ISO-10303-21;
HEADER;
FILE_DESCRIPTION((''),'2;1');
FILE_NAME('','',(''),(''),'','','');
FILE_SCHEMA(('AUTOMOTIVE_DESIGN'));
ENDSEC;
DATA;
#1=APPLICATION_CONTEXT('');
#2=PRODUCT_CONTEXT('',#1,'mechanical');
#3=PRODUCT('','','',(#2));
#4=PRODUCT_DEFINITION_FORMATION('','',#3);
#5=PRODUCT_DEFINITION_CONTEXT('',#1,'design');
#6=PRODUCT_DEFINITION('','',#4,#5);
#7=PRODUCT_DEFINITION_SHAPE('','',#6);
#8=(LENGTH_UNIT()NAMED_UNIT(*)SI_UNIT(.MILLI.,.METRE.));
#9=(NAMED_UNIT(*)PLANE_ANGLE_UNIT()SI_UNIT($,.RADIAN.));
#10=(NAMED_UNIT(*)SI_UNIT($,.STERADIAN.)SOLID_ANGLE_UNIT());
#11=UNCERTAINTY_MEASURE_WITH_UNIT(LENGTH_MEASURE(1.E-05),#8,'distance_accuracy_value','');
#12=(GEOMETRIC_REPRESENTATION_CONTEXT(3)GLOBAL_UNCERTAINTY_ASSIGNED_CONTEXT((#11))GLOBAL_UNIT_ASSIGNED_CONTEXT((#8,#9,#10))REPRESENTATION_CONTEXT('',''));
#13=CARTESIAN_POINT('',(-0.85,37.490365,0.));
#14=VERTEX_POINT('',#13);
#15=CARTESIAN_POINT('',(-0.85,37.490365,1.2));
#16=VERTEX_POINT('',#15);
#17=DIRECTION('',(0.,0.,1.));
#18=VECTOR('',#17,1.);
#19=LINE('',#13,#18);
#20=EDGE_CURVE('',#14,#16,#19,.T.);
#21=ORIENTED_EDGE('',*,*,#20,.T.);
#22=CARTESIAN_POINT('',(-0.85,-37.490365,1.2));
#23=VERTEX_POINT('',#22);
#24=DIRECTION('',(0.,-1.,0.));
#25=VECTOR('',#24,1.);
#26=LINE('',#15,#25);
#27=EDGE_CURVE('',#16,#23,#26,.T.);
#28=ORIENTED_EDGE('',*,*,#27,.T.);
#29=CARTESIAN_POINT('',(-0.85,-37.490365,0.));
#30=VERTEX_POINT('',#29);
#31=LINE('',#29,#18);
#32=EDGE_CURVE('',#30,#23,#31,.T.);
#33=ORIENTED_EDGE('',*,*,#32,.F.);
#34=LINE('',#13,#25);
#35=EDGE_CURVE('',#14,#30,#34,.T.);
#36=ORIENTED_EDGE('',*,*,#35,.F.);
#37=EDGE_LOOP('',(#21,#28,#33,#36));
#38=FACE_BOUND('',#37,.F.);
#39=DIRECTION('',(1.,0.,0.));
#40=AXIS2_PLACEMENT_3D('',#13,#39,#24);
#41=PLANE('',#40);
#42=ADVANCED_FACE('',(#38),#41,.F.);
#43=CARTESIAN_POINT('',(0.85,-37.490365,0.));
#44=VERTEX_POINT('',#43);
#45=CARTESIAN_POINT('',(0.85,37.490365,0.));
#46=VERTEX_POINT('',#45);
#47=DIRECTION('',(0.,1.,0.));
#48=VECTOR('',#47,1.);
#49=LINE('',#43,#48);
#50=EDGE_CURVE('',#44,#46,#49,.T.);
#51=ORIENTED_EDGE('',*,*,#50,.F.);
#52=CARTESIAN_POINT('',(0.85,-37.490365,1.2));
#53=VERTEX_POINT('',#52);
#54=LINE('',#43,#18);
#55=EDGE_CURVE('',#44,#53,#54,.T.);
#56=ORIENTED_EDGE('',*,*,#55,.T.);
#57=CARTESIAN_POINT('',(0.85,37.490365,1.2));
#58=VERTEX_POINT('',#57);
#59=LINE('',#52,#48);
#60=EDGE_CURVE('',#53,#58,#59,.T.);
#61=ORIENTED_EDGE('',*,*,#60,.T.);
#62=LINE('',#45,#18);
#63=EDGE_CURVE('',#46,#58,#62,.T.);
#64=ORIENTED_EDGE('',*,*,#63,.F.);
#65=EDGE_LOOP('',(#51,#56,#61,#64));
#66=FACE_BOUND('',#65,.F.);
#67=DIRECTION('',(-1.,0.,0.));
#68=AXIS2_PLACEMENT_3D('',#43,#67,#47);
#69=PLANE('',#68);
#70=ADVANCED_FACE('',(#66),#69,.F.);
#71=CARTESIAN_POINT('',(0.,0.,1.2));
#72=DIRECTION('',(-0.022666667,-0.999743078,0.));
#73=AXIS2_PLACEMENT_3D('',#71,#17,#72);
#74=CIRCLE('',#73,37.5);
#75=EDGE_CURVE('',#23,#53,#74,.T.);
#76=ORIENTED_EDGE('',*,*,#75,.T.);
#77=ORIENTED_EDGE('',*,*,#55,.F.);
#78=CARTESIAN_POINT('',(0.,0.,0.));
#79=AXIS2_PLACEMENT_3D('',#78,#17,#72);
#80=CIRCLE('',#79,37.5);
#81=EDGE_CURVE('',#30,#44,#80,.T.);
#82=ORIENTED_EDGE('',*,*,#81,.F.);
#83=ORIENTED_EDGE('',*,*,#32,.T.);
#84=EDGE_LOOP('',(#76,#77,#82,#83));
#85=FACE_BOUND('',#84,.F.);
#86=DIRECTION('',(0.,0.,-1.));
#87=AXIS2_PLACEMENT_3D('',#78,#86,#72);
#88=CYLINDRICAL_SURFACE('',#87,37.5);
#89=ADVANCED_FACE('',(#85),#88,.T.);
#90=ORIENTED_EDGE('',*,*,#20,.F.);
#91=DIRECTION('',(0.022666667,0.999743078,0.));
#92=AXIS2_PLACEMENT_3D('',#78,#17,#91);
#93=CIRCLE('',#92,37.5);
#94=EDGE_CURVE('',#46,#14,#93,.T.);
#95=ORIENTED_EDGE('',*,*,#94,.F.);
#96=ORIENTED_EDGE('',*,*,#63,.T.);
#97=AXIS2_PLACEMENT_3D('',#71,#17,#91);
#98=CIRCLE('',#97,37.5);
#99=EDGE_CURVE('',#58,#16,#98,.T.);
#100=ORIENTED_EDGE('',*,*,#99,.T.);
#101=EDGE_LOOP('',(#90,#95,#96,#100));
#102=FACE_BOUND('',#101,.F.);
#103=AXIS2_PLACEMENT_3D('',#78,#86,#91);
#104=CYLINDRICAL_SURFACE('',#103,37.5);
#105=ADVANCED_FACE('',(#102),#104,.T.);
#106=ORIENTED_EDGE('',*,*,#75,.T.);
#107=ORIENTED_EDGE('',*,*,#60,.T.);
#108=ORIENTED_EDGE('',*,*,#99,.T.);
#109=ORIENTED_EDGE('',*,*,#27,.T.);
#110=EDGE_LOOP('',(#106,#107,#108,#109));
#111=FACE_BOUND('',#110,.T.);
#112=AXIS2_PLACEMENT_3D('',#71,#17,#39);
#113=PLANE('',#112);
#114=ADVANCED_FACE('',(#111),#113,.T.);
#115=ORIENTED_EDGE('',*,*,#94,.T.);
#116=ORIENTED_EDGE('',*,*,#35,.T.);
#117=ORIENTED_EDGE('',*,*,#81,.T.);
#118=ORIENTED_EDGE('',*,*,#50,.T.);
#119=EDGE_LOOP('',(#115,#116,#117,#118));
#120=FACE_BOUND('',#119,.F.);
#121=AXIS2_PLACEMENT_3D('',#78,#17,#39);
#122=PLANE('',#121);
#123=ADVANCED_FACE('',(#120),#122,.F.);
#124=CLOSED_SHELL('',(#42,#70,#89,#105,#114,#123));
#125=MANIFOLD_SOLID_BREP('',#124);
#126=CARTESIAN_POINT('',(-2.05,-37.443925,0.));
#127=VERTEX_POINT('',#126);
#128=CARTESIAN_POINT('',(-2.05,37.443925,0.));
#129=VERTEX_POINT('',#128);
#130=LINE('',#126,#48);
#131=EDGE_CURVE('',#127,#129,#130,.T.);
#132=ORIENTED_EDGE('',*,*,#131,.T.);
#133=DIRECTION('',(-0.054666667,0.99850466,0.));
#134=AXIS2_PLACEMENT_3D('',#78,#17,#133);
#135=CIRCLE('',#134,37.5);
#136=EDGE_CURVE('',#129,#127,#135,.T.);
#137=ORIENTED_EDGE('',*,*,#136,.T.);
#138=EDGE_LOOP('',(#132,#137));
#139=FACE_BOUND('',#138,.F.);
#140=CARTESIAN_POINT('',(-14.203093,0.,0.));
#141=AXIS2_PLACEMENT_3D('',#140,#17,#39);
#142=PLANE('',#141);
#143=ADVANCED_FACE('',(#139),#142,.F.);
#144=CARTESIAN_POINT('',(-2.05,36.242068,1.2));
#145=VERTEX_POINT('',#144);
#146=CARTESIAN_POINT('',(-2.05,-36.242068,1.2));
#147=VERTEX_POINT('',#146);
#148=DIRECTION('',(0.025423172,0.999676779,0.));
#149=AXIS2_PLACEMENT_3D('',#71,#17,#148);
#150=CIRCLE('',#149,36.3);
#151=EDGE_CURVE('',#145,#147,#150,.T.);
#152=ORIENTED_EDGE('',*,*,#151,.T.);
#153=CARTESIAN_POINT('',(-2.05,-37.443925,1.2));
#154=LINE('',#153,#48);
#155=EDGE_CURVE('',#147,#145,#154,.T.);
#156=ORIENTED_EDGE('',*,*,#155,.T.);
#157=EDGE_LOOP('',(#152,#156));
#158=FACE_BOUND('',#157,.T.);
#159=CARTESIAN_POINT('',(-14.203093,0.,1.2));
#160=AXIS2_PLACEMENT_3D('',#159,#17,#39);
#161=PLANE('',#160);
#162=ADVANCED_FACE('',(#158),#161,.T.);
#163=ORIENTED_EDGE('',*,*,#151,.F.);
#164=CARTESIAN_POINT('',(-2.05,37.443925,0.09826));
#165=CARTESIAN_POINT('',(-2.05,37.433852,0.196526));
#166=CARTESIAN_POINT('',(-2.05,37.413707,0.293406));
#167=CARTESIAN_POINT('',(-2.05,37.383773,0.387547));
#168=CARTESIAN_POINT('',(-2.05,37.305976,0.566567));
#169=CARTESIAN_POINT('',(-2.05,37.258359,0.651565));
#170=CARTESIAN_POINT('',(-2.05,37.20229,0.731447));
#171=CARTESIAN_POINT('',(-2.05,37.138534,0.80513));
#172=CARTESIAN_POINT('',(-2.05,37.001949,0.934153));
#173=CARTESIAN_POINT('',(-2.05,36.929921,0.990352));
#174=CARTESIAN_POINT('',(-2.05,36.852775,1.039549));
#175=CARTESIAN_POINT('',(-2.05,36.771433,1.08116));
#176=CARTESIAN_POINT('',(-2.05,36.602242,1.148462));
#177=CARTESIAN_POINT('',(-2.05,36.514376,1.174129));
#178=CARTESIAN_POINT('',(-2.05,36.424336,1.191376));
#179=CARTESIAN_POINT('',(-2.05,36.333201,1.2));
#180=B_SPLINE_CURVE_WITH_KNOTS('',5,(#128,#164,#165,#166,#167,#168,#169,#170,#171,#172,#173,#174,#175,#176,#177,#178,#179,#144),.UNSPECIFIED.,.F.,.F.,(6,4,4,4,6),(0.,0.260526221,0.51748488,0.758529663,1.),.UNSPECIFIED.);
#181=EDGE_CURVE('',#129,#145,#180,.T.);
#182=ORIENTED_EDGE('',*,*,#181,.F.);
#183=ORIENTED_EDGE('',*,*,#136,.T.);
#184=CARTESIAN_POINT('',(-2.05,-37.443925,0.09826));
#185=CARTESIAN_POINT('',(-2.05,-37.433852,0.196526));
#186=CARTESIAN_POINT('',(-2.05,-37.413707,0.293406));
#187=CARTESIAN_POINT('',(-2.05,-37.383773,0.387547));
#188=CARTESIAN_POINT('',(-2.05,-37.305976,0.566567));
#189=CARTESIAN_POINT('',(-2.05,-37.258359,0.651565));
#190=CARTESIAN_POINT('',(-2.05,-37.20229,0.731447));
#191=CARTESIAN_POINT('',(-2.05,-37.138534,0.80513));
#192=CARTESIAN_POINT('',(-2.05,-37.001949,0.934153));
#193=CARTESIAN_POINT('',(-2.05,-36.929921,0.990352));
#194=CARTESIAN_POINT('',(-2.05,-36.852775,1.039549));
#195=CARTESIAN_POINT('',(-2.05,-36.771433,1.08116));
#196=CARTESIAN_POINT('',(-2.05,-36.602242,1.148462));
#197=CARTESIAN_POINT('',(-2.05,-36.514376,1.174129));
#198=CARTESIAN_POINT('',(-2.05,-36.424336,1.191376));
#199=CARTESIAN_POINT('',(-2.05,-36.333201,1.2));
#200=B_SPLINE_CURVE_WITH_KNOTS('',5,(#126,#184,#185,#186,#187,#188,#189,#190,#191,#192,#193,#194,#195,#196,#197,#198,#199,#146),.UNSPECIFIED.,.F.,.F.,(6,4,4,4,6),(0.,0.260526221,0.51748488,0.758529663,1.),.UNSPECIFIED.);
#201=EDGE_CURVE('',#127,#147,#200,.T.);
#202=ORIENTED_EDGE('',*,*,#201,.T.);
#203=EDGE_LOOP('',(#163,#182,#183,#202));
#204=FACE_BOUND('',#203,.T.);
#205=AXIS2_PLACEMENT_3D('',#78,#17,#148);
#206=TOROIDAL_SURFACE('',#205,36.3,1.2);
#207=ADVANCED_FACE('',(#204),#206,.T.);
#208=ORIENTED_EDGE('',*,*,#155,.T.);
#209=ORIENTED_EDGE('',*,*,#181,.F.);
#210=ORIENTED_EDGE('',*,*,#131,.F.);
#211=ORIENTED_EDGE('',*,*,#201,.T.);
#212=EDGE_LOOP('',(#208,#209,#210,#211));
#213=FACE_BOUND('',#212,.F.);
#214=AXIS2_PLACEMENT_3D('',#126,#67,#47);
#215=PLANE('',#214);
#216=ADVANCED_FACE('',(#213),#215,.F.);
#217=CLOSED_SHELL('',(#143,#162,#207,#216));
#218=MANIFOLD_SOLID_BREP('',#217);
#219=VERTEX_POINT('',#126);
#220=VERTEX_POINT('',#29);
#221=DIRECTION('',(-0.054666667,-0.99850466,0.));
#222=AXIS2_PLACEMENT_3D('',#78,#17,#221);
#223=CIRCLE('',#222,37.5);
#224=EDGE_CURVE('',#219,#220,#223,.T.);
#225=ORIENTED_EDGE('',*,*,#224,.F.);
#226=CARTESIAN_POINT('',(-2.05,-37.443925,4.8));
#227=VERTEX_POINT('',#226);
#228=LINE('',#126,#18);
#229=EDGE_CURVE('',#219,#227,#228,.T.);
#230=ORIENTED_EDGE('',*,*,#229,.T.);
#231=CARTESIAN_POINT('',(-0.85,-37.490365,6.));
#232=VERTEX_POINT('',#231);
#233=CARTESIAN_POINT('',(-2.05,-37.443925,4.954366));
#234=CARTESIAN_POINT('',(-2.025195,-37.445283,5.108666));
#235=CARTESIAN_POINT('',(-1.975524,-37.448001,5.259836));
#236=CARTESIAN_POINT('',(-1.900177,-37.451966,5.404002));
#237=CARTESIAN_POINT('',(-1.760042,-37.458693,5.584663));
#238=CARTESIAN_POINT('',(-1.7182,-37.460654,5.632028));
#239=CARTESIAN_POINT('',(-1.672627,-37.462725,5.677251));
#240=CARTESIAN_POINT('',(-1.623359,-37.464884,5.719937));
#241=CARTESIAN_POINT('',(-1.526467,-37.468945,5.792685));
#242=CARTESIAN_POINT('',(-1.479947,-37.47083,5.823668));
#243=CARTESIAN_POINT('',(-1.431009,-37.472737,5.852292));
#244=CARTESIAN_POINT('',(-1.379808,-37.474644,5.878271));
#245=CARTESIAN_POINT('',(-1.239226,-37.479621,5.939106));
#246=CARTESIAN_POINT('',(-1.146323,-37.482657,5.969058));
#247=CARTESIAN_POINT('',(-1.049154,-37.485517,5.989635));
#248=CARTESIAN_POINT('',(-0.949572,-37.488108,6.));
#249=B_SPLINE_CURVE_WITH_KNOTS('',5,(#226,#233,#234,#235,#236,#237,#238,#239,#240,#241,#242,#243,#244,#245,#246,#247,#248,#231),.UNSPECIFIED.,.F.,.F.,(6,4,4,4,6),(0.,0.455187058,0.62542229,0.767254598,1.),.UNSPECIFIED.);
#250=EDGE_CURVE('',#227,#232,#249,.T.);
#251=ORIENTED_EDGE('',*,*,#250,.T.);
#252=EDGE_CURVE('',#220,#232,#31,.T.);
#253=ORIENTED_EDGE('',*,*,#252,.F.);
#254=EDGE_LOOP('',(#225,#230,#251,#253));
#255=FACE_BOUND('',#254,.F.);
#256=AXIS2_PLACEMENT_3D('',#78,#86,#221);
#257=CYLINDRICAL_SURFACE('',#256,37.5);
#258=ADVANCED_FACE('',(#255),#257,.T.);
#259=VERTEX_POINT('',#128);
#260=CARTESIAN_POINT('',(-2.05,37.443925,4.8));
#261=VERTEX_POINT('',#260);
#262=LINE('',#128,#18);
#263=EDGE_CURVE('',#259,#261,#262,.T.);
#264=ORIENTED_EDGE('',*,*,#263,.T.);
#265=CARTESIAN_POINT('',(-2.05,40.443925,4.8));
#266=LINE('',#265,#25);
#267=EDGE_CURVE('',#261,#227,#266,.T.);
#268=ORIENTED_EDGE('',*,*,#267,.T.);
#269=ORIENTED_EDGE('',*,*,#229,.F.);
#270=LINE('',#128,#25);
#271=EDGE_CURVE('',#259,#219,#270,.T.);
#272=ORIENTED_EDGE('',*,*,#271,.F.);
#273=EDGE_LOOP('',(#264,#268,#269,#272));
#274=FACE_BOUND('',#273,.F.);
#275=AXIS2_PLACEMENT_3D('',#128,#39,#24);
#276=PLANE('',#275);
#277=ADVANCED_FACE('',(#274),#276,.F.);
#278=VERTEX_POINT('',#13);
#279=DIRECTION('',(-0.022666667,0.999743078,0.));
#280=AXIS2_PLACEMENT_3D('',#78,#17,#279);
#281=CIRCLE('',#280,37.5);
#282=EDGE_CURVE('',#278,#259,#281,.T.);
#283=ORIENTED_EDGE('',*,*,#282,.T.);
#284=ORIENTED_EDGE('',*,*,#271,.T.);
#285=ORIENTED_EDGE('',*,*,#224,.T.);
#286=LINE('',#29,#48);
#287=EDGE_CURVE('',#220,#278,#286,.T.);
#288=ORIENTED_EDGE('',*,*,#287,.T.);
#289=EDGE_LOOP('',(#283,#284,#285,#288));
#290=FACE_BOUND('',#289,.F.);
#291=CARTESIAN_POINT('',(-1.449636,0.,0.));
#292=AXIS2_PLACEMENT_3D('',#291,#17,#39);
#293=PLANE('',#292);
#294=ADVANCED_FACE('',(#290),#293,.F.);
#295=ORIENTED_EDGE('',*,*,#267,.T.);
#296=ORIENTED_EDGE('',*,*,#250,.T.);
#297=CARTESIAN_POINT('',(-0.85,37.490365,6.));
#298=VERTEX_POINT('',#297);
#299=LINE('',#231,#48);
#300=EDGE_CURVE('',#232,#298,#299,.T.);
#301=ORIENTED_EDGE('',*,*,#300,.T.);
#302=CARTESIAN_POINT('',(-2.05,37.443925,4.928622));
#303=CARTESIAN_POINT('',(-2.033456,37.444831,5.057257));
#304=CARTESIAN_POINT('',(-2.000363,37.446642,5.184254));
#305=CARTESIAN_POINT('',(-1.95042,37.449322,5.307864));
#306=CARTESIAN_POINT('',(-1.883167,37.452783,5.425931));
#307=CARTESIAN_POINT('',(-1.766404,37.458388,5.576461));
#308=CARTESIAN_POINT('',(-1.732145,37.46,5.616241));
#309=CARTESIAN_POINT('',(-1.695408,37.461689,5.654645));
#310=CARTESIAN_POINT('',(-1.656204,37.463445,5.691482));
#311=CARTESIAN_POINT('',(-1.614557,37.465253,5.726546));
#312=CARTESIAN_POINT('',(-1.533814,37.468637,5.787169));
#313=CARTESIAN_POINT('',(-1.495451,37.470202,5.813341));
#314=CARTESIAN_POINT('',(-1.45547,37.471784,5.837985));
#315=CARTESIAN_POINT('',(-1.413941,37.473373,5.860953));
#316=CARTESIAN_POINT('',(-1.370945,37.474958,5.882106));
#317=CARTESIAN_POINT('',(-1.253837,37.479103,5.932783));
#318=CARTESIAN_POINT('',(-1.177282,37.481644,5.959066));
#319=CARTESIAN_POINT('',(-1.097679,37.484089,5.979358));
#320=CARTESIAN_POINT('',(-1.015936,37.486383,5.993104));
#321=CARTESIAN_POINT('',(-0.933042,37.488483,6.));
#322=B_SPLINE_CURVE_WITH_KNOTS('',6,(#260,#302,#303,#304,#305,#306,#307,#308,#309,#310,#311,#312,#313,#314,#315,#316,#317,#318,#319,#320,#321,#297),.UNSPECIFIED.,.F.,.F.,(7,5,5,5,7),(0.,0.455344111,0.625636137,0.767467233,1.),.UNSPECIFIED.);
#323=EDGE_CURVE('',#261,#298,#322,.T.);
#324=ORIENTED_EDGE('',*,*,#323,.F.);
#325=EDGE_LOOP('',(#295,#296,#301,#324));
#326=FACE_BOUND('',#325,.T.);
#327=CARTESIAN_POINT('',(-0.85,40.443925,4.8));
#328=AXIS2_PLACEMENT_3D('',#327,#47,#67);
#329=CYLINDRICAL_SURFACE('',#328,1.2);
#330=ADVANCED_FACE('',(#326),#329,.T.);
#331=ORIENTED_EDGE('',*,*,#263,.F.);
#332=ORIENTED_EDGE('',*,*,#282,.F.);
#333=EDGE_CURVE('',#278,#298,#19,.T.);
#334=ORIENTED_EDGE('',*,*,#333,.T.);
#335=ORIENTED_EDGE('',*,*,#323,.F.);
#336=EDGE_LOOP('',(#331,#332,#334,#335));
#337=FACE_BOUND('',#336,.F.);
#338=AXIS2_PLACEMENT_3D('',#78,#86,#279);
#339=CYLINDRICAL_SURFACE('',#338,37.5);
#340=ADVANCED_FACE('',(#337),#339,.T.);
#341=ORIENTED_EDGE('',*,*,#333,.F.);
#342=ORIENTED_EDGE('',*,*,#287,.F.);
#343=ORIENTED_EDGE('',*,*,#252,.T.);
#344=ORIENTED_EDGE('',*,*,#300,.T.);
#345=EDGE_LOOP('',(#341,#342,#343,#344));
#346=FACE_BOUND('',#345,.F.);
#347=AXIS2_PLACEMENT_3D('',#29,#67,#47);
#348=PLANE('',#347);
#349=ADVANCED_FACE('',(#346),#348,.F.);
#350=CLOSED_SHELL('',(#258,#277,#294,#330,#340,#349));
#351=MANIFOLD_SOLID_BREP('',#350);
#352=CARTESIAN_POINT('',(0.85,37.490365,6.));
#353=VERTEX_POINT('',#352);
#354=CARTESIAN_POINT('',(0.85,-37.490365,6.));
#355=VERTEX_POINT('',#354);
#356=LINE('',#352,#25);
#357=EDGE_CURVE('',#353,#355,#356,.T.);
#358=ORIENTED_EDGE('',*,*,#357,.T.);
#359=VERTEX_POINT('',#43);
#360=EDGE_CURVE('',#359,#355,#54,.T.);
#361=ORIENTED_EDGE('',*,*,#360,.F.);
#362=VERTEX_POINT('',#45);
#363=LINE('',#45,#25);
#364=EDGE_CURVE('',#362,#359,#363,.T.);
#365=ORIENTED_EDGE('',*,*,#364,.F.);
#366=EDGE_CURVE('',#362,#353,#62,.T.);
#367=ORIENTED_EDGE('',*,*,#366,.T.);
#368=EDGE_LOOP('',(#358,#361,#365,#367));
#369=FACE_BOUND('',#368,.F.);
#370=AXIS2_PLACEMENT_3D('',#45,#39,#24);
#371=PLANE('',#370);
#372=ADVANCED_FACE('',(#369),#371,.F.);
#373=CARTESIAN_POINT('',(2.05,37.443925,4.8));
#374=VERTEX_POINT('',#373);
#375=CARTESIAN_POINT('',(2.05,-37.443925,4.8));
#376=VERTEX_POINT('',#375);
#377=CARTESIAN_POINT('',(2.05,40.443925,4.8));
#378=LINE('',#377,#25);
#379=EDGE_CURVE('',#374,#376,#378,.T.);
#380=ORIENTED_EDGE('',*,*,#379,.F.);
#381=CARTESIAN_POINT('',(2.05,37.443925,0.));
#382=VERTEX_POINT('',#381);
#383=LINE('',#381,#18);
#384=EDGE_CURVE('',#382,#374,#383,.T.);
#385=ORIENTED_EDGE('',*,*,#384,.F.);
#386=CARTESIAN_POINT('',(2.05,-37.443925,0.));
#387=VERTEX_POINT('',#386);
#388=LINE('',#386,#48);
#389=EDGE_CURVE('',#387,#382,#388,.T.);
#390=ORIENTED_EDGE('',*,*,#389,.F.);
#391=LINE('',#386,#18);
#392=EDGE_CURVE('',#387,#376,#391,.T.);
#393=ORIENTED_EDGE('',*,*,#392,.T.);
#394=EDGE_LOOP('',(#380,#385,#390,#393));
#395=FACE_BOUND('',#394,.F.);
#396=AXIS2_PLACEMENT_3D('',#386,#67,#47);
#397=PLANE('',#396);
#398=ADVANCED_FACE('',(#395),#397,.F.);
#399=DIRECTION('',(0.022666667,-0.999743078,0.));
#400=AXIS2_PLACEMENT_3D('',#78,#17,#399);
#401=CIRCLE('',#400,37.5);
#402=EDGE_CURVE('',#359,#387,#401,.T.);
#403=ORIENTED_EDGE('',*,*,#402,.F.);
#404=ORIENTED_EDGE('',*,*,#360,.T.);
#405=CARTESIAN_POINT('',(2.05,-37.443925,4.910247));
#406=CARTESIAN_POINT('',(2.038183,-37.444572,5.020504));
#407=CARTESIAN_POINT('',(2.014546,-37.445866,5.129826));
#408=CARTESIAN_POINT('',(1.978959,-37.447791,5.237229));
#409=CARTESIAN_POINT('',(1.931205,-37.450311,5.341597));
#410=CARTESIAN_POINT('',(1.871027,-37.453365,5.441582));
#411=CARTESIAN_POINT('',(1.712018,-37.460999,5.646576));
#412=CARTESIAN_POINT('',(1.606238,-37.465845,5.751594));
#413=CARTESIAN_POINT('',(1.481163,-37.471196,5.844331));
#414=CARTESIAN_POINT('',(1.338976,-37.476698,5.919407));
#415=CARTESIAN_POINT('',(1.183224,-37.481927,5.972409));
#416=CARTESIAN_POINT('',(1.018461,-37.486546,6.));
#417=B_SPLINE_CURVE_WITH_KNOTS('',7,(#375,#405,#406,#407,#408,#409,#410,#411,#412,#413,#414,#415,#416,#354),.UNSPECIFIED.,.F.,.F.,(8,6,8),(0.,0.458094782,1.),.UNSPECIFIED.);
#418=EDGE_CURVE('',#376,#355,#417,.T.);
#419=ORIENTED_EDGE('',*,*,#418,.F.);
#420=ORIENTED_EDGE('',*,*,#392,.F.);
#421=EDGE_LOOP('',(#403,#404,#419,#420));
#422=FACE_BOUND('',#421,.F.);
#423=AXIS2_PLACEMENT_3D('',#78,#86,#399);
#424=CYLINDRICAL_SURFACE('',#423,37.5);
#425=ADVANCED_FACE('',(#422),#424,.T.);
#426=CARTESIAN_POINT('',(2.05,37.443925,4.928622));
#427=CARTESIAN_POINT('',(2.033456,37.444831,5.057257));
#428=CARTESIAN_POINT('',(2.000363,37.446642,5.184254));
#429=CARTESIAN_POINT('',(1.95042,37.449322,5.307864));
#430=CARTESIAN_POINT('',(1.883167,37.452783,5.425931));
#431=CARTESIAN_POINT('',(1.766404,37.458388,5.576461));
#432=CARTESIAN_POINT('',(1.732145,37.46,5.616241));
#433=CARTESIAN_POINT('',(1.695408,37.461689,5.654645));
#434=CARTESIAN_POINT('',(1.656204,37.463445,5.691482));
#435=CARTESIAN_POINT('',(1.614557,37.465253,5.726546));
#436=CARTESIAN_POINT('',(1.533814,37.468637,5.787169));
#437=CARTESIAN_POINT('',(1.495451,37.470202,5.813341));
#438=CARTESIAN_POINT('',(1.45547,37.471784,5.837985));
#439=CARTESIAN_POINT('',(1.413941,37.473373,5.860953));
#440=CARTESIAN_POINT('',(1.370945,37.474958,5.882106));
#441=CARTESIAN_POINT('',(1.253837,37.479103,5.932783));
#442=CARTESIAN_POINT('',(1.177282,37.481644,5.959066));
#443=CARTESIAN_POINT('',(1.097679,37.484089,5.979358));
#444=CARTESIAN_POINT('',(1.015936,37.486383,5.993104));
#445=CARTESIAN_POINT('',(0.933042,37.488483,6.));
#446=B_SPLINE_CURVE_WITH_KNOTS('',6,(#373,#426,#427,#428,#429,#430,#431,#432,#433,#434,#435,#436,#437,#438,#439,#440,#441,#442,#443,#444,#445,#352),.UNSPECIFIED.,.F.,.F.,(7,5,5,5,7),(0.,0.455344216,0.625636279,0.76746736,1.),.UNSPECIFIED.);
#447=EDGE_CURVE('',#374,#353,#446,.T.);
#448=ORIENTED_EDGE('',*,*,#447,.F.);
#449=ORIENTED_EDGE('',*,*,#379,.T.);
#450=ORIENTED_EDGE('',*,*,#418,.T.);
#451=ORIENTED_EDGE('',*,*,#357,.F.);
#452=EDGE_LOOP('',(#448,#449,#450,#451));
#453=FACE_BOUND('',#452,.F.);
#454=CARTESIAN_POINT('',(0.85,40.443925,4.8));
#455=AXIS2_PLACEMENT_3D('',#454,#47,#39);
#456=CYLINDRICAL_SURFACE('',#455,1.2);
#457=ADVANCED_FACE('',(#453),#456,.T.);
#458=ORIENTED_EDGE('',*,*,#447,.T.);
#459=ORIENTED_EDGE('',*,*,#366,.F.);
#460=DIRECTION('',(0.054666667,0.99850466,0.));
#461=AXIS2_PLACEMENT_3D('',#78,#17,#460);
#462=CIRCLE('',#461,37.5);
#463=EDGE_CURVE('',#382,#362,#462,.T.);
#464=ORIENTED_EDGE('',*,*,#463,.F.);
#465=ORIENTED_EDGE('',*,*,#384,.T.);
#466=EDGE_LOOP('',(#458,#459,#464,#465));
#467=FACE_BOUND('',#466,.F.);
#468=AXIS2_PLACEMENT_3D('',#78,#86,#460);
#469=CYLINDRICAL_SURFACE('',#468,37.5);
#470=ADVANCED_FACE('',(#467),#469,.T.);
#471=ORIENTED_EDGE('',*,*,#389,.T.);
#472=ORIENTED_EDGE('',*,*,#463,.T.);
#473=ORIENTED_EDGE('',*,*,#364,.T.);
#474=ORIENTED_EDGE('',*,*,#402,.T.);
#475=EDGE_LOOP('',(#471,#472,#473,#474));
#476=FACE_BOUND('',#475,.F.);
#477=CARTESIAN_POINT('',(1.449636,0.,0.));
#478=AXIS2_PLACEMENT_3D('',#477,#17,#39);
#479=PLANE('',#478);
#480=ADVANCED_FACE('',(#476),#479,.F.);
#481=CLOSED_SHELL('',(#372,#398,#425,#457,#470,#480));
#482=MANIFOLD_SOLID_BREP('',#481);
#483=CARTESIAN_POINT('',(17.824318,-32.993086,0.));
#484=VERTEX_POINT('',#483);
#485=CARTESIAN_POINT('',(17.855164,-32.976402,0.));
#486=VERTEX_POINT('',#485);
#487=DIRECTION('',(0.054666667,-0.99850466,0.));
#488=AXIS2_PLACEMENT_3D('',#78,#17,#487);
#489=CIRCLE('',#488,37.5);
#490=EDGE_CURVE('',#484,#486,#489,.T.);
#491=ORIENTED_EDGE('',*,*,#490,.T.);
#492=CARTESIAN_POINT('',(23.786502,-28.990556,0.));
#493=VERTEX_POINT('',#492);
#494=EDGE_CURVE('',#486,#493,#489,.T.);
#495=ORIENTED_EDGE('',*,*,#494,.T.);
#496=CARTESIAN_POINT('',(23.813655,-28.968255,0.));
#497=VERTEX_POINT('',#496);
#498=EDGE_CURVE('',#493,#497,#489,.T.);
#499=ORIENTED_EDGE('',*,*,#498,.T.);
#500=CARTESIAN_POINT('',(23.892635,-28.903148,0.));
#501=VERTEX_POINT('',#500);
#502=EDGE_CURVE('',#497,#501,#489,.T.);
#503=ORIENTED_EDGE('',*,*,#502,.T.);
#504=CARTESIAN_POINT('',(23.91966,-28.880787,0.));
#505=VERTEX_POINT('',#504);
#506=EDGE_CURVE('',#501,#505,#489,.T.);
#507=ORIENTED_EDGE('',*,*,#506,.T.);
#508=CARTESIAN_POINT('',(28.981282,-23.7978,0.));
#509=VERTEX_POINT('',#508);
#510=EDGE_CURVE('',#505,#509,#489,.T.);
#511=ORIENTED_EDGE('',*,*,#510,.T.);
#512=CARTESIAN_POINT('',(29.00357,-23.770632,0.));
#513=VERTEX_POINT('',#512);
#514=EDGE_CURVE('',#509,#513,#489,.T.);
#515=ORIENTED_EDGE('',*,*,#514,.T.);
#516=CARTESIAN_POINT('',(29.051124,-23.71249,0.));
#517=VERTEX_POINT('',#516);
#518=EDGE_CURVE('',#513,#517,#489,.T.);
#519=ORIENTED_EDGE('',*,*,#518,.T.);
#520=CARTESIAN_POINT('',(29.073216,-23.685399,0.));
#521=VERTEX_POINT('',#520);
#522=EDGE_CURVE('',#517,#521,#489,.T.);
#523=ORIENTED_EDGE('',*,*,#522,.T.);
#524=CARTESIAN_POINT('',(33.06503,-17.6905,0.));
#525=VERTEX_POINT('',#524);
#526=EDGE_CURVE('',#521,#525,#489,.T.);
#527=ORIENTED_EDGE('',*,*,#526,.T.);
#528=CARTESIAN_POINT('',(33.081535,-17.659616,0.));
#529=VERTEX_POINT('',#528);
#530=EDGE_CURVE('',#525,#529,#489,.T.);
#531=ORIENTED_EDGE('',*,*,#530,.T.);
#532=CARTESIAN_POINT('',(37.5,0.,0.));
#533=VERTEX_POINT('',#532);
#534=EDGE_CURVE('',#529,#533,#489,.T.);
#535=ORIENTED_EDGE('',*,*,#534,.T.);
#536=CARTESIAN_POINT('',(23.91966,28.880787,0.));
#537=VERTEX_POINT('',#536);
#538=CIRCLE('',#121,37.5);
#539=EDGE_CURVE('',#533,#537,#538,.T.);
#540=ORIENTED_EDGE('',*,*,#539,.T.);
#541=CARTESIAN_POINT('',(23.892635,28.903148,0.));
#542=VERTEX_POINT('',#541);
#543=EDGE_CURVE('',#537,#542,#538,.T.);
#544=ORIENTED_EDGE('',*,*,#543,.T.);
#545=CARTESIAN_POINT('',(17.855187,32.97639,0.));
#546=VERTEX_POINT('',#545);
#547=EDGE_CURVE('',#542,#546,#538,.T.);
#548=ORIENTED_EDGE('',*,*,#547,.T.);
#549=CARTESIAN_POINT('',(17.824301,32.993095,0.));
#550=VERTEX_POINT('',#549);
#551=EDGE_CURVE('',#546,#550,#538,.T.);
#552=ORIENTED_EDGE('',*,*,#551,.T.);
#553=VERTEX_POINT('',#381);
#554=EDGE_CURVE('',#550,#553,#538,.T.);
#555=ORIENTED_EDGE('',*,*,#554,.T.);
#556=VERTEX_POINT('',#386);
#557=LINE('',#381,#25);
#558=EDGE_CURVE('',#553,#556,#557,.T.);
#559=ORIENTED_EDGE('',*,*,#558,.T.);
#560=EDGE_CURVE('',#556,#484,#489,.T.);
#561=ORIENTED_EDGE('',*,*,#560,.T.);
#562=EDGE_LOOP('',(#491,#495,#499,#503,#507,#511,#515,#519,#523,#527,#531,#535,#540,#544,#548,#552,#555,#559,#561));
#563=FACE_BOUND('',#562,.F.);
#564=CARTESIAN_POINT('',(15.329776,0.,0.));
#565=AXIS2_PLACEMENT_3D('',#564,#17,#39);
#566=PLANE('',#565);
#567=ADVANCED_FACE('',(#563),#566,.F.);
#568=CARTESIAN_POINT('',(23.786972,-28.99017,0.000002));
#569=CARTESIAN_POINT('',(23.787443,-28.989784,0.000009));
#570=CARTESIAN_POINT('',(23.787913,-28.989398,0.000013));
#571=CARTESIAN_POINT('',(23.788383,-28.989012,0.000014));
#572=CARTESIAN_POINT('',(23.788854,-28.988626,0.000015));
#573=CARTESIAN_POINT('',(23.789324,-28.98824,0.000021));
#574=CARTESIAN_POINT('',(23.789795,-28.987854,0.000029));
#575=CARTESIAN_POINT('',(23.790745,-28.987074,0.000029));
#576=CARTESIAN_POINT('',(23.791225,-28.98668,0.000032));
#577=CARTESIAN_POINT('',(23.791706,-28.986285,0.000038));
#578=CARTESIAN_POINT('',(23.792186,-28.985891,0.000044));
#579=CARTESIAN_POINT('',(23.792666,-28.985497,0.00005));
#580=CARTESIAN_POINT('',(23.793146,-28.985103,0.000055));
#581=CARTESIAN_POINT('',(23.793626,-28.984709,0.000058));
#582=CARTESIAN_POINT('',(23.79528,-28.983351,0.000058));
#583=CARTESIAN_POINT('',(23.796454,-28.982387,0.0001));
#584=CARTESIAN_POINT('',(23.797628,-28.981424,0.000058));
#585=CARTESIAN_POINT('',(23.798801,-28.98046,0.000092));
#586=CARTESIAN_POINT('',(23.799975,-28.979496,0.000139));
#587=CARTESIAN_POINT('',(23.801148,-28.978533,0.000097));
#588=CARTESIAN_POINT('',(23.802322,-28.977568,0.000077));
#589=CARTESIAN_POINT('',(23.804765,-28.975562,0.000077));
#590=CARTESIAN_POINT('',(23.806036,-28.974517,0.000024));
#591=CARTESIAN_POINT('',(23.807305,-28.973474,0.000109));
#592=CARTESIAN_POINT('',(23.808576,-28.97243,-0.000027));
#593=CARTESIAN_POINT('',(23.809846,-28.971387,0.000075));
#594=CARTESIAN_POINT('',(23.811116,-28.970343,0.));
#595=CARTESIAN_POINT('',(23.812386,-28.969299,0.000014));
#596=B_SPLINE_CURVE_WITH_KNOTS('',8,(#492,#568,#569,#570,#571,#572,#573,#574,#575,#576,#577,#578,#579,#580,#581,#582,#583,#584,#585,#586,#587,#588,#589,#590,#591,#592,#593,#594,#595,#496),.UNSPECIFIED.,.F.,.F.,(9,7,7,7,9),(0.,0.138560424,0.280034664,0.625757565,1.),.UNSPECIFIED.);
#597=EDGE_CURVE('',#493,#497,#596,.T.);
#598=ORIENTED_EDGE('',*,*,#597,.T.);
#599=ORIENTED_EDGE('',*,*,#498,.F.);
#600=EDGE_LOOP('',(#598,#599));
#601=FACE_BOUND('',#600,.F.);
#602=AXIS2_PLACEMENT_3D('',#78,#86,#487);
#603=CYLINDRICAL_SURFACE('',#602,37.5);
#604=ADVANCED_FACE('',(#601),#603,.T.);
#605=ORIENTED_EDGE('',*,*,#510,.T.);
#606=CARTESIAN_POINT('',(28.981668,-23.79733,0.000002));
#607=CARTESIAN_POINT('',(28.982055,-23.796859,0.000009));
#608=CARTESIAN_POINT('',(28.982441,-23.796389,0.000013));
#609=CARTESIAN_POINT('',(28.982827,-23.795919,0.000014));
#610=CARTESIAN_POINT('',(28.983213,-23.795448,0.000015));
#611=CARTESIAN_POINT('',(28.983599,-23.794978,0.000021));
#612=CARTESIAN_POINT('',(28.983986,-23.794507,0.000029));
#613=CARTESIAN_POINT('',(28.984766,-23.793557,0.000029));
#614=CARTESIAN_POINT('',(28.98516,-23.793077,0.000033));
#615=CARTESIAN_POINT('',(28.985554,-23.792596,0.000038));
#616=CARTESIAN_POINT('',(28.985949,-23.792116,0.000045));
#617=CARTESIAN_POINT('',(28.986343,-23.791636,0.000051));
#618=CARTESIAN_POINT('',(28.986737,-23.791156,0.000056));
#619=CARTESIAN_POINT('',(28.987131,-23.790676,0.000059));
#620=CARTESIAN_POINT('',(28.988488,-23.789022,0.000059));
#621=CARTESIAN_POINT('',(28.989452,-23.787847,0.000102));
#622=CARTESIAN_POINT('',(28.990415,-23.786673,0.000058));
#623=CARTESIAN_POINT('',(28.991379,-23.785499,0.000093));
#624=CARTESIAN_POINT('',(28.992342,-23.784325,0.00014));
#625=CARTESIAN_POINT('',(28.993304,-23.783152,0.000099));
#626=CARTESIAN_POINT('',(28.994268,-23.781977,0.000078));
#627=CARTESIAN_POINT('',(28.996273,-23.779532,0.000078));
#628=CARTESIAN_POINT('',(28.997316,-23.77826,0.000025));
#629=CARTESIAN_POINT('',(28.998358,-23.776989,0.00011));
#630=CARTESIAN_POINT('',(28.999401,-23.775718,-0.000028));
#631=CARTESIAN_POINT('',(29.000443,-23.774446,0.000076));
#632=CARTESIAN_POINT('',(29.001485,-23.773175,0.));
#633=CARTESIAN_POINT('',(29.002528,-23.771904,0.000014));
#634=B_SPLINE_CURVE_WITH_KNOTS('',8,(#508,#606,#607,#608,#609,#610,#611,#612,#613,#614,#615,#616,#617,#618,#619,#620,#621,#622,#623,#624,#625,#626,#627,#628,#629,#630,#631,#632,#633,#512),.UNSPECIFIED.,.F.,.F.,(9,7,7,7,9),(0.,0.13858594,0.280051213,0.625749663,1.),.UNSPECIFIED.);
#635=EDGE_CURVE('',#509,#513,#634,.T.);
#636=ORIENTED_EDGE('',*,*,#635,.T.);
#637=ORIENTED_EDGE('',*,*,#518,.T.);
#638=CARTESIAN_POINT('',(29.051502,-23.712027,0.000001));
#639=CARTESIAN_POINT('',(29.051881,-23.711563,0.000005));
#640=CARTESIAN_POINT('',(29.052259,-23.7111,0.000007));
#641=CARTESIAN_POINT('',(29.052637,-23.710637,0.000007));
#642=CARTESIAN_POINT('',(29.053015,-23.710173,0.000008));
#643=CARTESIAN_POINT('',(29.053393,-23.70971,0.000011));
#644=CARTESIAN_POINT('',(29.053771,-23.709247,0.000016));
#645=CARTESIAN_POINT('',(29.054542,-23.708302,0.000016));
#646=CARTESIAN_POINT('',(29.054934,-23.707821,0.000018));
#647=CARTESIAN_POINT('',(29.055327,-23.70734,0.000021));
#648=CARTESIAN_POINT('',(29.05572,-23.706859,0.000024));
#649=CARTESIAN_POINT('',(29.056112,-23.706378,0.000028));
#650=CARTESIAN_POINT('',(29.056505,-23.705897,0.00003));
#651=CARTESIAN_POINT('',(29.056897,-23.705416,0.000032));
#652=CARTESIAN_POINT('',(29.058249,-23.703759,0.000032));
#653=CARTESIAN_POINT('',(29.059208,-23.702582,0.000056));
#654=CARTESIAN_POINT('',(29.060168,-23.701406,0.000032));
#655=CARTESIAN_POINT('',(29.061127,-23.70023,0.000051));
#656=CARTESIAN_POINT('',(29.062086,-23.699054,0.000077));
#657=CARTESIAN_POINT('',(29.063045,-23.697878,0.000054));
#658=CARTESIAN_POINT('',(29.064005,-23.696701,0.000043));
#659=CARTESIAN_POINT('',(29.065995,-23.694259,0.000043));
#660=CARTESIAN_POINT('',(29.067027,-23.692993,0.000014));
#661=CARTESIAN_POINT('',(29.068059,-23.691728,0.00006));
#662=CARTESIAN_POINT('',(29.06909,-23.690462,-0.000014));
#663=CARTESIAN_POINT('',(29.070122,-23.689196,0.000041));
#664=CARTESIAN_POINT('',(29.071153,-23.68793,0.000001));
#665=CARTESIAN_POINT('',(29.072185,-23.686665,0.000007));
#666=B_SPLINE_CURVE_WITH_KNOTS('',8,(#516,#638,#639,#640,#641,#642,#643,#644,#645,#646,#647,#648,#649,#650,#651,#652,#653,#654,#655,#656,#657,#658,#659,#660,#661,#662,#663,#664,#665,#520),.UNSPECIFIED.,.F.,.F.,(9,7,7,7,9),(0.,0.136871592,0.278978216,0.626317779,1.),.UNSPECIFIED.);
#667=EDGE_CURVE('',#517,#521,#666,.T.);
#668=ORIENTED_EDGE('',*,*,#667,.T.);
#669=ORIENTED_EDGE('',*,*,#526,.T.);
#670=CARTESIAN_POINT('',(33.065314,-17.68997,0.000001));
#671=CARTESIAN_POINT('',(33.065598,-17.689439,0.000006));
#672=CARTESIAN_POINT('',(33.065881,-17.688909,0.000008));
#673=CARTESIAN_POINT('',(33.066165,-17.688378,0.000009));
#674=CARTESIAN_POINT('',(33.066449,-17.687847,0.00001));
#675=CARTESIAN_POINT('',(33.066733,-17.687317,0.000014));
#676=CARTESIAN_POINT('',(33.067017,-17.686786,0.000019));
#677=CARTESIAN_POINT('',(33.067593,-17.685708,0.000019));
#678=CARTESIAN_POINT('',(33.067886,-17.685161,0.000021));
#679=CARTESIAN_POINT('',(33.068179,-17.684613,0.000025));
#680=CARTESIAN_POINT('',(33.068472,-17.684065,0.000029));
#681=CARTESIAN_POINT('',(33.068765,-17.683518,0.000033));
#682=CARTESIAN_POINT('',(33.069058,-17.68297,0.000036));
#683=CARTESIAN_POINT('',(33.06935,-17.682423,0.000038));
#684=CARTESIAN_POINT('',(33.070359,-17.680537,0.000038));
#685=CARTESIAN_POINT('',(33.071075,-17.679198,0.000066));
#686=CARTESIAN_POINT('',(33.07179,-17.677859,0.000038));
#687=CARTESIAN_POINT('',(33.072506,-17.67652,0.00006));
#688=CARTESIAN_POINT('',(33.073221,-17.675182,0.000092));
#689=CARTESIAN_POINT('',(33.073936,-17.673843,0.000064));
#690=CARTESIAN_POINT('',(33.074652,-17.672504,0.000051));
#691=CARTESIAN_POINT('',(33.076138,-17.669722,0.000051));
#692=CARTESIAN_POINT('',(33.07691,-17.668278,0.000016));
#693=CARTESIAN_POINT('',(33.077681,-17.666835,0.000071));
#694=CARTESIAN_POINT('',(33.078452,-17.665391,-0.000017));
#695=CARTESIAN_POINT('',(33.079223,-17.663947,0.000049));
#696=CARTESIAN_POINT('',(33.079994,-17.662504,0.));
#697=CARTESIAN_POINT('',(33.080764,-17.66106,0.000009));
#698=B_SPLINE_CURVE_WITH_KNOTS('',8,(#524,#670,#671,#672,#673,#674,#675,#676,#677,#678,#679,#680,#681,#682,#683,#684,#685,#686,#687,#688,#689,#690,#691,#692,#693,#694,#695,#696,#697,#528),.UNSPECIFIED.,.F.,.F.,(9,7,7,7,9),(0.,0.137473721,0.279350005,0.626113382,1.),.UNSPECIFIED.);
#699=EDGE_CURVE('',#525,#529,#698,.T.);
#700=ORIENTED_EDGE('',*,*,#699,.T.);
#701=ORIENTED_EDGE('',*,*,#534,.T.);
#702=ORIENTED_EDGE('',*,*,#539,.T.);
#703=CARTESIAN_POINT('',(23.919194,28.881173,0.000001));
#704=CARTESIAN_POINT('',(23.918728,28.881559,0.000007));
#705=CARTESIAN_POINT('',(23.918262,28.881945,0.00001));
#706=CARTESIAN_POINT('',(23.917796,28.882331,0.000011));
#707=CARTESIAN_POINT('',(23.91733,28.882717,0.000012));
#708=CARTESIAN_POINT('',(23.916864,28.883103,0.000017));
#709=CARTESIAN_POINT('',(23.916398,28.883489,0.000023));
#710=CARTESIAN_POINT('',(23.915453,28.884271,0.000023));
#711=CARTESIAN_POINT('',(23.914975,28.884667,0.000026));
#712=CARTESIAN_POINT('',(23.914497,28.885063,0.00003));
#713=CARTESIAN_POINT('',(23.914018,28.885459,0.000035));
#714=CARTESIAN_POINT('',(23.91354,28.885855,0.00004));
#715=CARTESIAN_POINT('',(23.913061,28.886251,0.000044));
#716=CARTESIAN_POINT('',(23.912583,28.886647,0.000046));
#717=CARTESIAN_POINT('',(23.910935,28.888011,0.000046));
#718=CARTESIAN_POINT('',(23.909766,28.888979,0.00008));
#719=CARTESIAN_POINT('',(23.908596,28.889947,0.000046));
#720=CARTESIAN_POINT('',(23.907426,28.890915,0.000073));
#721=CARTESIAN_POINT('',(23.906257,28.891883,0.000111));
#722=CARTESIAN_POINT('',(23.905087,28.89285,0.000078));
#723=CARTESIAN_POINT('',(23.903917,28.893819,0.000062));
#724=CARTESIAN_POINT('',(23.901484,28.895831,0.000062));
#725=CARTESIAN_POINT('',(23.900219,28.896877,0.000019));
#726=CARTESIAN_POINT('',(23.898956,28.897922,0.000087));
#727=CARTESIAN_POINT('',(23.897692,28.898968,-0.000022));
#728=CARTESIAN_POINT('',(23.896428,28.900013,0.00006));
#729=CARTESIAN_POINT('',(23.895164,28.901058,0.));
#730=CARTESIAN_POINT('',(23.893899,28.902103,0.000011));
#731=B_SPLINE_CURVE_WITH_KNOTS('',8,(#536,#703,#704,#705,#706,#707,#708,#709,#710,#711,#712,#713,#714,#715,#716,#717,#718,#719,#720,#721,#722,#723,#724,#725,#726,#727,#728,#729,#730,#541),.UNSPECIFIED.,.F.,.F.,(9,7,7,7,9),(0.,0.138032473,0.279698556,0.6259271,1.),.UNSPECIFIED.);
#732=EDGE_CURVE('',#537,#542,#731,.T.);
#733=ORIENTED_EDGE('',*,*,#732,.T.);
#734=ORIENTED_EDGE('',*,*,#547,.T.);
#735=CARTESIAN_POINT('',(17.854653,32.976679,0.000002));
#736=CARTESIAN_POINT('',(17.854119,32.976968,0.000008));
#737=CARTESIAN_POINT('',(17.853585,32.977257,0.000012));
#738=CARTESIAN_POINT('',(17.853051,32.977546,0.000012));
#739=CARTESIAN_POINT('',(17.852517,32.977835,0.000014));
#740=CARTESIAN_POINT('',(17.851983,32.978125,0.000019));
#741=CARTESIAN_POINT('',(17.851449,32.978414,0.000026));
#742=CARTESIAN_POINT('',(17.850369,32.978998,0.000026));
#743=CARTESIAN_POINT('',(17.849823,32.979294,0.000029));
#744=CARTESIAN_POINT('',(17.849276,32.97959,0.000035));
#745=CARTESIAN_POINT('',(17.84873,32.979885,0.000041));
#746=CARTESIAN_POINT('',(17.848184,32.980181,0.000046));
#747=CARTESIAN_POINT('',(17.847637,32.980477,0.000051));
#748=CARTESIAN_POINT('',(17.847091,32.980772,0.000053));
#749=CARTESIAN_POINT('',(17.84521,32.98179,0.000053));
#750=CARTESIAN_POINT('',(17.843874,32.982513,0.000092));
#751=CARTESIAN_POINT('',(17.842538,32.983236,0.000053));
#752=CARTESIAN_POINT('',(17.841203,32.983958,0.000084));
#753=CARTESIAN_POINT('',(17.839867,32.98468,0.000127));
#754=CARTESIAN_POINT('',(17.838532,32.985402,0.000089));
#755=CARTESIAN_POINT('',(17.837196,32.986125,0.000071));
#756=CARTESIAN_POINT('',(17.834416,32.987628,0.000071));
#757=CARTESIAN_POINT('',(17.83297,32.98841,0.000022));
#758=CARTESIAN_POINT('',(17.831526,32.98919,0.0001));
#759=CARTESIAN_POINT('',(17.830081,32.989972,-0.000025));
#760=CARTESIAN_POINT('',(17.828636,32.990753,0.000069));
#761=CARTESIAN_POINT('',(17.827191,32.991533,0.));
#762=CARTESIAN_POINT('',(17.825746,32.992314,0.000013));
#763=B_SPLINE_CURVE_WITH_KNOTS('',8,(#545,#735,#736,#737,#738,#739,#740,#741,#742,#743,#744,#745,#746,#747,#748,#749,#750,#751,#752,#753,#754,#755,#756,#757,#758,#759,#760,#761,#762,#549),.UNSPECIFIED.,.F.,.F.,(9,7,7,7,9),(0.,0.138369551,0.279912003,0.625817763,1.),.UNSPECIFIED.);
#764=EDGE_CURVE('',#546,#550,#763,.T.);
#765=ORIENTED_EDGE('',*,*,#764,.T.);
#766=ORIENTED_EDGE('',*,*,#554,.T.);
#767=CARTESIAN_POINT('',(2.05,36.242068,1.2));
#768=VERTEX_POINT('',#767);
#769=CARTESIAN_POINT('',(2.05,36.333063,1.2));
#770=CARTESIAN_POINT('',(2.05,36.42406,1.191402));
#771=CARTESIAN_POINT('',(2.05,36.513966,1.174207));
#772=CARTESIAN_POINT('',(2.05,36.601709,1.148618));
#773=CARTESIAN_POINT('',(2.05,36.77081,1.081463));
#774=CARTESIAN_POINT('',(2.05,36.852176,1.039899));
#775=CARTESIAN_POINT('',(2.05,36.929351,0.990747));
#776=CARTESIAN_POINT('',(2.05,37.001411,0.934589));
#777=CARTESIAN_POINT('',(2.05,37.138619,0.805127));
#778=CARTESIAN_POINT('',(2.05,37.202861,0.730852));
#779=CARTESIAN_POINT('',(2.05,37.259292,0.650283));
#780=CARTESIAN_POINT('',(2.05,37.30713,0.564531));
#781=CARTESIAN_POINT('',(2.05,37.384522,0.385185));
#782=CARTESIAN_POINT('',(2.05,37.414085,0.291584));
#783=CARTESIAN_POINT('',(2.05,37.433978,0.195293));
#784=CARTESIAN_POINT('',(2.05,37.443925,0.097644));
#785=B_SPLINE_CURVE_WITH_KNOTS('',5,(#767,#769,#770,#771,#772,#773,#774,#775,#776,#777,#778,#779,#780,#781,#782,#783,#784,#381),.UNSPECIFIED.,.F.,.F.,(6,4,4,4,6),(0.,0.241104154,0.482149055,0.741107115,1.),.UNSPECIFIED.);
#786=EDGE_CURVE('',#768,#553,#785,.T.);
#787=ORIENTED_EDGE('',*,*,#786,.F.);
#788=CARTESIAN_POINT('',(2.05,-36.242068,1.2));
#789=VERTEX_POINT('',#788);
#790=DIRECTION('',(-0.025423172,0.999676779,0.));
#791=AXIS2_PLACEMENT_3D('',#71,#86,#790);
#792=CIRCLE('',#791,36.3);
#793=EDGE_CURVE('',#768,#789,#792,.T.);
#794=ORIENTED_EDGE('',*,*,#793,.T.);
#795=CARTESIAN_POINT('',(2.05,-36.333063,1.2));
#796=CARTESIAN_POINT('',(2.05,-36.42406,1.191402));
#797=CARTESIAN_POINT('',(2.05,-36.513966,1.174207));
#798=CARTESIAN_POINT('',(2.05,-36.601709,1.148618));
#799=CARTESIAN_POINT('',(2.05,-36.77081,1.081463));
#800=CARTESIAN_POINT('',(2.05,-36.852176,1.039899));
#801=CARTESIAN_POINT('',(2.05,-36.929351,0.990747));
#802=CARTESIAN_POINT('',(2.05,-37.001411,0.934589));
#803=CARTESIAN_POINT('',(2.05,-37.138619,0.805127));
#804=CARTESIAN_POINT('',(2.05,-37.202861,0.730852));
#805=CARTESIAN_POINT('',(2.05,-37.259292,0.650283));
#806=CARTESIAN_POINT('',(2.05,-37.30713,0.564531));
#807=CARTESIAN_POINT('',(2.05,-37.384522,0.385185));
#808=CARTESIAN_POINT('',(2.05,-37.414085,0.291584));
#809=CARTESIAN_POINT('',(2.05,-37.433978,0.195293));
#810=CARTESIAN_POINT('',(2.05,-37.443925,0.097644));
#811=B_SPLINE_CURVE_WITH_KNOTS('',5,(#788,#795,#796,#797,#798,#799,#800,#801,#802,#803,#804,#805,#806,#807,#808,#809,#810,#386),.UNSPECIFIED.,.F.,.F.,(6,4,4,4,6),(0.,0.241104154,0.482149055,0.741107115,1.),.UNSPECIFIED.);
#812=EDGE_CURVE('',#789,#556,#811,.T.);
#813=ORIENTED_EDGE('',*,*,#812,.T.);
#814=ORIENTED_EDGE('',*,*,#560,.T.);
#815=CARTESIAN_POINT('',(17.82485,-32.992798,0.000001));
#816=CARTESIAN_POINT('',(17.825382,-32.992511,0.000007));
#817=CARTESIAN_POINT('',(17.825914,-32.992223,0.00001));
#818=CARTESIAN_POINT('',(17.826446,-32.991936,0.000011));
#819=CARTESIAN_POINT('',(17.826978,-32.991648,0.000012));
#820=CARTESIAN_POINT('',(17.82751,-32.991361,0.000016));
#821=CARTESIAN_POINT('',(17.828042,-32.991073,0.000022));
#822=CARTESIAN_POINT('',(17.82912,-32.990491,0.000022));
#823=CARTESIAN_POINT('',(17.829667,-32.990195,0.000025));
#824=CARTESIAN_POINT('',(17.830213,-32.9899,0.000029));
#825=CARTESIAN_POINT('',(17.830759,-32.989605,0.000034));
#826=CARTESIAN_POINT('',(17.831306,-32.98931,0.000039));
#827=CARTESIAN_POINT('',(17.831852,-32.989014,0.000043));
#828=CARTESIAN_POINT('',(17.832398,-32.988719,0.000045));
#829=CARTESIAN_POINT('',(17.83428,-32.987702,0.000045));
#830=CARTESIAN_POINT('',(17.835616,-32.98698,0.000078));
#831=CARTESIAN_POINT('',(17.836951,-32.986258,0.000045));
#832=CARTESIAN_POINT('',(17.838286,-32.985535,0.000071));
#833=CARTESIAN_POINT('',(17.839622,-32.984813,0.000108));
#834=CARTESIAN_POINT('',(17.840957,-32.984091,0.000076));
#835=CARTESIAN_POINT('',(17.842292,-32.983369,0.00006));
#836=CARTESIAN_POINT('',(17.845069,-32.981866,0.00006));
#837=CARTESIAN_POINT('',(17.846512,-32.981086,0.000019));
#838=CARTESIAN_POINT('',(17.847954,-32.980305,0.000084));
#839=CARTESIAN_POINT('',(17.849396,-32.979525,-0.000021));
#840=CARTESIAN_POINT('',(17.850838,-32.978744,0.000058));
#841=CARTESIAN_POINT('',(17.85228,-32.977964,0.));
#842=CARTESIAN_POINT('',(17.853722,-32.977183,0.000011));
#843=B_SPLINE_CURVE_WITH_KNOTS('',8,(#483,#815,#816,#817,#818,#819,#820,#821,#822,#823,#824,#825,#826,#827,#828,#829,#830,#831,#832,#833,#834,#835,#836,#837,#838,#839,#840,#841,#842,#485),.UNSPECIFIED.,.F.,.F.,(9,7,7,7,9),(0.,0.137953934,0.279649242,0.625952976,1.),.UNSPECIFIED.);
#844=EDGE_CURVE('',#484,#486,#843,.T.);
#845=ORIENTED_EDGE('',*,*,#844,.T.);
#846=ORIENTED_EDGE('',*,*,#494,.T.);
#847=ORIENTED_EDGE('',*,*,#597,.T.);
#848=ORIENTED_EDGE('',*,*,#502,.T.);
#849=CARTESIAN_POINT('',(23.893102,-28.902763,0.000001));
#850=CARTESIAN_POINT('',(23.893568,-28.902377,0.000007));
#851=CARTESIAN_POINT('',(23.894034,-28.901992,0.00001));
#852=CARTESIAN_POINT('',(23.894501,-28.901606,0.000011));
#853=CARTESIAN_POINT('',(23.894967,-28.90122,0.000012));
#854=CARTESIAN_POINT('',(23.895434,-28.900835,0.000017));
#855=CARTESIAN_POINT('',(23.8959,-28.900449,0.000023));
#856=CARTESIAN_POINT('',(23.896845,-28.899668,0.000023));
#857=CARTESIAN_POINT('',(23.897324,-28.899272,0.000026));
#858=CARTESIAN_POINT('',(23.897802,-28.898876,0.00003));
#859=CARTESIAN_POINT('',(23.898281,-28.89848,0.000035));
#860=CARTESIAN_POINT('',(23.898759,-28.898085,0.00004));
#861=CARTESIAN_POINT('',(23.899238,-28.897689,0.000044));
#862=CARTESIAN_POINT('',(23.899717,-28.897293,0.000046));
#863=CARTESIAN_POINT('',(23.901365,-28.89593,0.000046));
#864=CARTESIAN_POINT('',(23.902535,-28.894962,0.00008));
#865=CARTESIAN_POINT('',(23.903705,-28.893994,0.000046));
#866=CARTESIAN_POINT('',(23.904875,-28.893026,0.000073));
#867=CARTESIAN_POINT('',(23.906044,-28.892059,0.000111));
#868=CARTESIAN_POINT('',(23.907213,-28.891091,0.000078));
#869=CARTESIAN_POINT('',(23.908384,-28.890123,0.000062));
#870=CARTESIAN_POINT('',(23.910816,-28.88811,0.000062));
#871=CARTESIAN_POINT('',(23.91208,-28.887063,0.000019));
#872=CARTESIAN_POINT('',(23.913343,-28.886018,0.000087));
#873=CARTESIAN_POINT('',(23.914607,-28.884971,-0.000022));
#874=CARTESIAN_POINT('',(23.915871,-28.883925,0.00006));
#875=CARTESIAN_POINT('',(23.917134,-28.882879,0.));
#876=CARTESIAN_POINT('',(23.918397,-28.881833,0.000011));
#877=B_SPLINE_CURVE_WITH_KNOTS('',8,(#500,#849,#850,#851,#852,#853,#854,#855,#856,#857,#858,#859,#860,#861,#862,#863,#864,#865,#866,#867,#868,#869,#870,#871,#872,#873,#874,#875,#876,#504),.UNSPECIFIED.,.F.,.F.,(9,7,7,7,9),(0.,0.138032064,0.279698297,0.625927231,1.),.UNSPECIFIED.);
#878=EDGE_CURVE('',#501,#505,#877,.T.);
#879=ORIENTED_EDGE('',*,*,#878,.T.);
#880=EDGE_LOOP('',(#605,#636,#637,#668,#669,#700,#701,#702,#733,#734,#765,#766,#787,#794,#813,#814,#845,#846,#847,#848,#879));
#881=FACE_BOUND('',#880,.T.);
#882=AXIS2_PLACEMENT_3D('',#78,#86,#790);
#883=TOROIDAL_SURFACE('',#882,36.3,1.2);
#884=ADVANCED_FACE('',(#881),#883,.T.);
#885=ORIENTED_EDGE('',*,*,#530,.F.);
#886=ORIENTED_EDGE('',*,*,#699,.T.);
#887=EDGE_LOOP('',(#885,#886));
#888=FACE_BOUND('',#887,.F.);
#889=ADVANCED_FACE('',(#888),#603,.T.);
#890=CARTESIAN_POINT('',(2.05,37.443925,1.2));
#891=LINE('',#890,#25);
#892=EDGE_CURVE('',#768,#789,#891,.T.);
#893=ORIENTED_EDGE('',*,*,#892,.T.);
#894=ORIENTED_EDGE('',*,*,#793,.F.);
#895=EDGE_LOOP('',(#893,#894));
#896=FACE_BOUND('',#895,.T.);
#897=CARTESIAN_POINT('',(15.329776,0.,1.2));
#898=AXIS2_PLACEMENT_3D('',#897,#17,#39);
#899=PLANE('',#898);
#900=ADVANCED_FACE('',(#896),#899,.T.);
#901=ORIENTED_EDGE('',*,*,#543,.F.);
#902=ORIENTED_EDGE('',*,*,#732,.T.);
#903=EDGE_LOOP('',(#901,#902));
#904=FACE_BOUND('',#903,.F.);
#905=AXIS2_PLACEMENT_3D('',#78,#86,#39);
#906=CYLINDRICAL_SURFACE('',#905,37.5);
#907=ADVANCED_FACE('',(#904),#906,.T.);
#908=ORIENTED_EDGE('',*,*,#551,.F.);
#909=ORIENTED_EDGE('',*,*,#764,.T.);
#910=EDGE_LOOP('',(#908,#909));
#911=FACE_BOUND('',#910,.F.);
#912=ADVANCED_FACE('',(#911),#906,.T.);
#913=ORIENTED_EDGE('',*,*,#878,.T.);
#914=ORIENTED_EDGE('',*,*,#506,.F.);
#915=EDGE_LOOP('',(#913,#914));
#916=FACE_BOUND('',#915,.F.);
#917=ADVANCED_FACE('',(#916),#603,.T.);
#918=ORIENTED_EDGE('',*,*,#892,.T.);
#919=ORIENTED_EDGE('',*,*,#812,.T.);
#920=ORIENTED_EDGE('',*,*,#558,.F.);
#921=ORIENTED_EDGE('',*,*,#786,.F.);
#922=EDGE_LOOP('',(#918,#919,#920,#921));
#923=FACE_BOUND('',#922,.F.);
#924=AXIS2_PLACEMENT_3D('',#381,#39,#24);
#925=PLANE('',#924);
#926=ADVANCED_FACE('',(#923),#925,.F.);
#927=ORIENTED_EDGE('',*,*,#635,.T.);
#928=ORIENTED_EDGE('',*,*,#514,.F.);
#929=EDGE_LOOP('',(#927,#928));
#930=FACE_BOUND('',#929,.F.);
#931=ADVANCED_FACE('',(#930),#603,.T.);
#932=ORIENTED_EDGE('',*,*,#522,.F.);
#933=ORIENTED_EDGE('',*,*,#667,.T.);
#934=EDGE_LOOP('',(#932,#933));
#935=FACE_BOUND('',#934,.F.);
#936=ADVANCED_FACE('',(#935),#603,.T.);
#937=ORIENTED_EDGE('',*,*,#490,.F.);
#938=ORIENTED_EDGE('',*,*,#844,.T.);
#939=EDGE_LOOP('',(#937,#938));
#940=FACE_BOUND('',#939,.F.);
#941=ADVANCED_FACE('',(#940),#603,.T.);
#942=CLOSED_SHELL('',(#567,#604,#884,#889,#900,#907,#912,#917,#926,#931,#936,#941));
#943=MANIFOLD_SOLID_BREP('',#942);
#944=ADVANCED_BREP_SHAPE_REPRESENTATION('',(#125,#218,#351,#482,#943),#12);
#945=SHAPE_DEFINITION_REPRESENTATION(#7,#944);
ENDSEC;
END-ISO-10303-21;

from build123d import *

# Parameters (mm, degrees)
F1_DEPTH      = 1.2
F2_DEPTH      = 6
F3_T2_ANGLE   = 182.9135947962
F3_2_T2_ANGLE = 182.9135947962
F3_3_T1_DEPTH = 80.8878494817
F3_4_T1_DEPTH = 80.8878494817


# Not quite as in the source:
# - a fillet or chamfer that OpenCascade refuses, or shapes differently, is made with other operations: its cross-section is extruded or revolved along the edge and cut away or added


with BuildPart() as f1:
    # F0 (on Top) → F1 (new body)
    with BuildSketch(Plane.XY):
        with BuildLine():
            Line((-2.05, -37.4439247409), (-2.05, 37.4439247409))
            ThreePointArc((-2.05, 37.4439247409), (-37.5, 0), (-2.05, -37.4439247409))
        make_face()
    extrude(amount=F1_DEPTH)

    # F3: fillet of radius 1.2 on 1 edges, made by hand

    # F3_s1 → F3_t2 (revolve, cut)
    with BuildSketch(Plane(origin=(0, 0, 0), x_dir=(0, 0, 1), z_dir=(0.9996767789, -0.0254231717, 0))):
        with BuildLine():
            ThreePointArc((0, -37.5), (0.8485281374, -37.1485281374), (1.2, -36.3))
            Line((1.2, -36.3), (1.2, -37.5))
            Line((1.2, -37.5), (0, -37.5))
        make_face()
    revolve(axis=Axis((0, 0, 1.2), (0, 0, 1)), revolution_arc=F3_T2_ANGLE, mode=Mode.SUBTRACT)


with BuildPart() as f1b:
    # F0 (on Top) → F1, piece 2 (new body)
    with BuildSketch(Plane.XY):
        with BuildLine():
            Line((0.85, -37.490365429), (0.85, 37.490365429))
            ThreePointArc((0.85, 37.490365429), (0, 37.5), (-0.85, 37.490365429))
            Line((-0.85, 37.490365429), (-0.85, -37.490365429))
            ThreePointArc((-0.85, -37.490365429), (0, -37.5), (0.85, -37.490365429))
        make_face()
    extrude(amount=F1_DEPTH)


with BuildPart() as f1c:
    # F0 (on Top) → F1, piece 3 (new body)
    with BuildSketch(Plane.XY):
        with BuildLine():
            ThreePointArc((2.05, -37.4439247409), (27.2316451945, -25.7815340893), (37.5, 0))
            ThreePointArc((37.5, 0), (27.2316451945, 25.7815340893), (2.05, 37.4439247409))
            Line((2.05, 37.4439247409), (2.05, -37.4439247409))
        make_face()
    extrude(amount=F1_DEPTH)

    # F3#2: fillet of radius 1.2 on 1 edges, made by hand

    # F3_2_s1 → F3_2_t2 (revolve, cut)
    with BuildSketch(Plane(origin=(0, 0, 0), x_dir=(0, 0, 1), z_dir=(-0.9996767789, -0.0254231717, 0))):
        with BuildLine():
            ThreePointArc((1.2, 36.3), (0.8485281374, 37.1485281374), (0, 37.5))
            Line((0, 37.5), (1.2, 37.5))
            Line((1.2, 37.5), (1.2, 36.3))
        make_face()
    revolve(axis=Axis((0, 0, 1.2), (0, 0, -1)), revolution_arc=F3_2_T2_ANGLE, mode=Mode.SUBTRACT)


with BuildPart() as f2:
    # F0 (on Top) → F2 (new body)
    with BuildSketch(Plane.XY):
        with BuildLine():
            Line((2.05, -37.4439247409), (2.05, 37.4439247409))
            ThreePointArc((2.05, 37.4439247409), (1.4501859137, 37.4719489861), (0.85, 37.490365429))
            Line((0.85, 37.490365429), (0.85, -37.490365429))
            ThreePointArc((0.85, -37.490365429), (1.4501859137, -37.4719489861), (2.05, -37.4439247409))
        make_face()
    extrude(amount=F2_DEPTH)

    # F3#3: fillet of radius 1.2 on 1 edges, made by hand

    # F3_3_s2 → F3_3_t1 (cut)
    with BuildSketch(Plane.XZ.offset(-40.4439247409)):
        with BuildLine():
            ThreePointArc((2.05, 4.8), (1.6985281374, 5.6485281374), (0.85, 6))
            Line((0.85, 6), (2.05, 6))
            Line((2.05, 6), (2.05, 4.8))
        make_face()
    extrude(amount=F3_3_T1_DEPTH, mode=Mode.SUBTRACT)


with BuildPart() as f2b:
    # F0 (on Top) → F2, piece 2 (new body)
    with BuildSketch(Plane.XY):
        with BuildLine():
            Line((-0.85, -37.490365429), (-0.85, 37.490365429))
            ThreePointArc((-0.85, 37.490365429), (-1.4501859137, 37.4719489861), (-2.05, 37.4439247409))
            Line((-2.05, 37.4439247409), (-2.05, -37.4439247409))
            ThreePointArc((-2.05, -37.4439247409), (-1.4501859137, -37.4719489861), (-0.85, -37.490365429))
        make_face()
    extrude(amount=F2_DEPTH)

    # F3#4: fillet of radius 1.2 on 1 edges, made by hand

    # F3_4_s2 → F3_4_t1 (cut)
    with BuildSketch(Plane.XZ.offset(-40.4439247409)):
        with BuildLine():
            ThreePointArc((-2.05, 4.8), (-1.6985281374, 5.6485281374), (-0.85, 6))
            Line((-0.85, 6), (-2.05, 6))
            Line((-2.05, 6), (-2.05, 4.8))
        make_face()
    extrude(amount=F3_4_T1_DEPTH, mode=Mode.SUBTRACT)


solid = Compound([f1.part, f1b.part, f1c.part, f2.part, f2b.part])
